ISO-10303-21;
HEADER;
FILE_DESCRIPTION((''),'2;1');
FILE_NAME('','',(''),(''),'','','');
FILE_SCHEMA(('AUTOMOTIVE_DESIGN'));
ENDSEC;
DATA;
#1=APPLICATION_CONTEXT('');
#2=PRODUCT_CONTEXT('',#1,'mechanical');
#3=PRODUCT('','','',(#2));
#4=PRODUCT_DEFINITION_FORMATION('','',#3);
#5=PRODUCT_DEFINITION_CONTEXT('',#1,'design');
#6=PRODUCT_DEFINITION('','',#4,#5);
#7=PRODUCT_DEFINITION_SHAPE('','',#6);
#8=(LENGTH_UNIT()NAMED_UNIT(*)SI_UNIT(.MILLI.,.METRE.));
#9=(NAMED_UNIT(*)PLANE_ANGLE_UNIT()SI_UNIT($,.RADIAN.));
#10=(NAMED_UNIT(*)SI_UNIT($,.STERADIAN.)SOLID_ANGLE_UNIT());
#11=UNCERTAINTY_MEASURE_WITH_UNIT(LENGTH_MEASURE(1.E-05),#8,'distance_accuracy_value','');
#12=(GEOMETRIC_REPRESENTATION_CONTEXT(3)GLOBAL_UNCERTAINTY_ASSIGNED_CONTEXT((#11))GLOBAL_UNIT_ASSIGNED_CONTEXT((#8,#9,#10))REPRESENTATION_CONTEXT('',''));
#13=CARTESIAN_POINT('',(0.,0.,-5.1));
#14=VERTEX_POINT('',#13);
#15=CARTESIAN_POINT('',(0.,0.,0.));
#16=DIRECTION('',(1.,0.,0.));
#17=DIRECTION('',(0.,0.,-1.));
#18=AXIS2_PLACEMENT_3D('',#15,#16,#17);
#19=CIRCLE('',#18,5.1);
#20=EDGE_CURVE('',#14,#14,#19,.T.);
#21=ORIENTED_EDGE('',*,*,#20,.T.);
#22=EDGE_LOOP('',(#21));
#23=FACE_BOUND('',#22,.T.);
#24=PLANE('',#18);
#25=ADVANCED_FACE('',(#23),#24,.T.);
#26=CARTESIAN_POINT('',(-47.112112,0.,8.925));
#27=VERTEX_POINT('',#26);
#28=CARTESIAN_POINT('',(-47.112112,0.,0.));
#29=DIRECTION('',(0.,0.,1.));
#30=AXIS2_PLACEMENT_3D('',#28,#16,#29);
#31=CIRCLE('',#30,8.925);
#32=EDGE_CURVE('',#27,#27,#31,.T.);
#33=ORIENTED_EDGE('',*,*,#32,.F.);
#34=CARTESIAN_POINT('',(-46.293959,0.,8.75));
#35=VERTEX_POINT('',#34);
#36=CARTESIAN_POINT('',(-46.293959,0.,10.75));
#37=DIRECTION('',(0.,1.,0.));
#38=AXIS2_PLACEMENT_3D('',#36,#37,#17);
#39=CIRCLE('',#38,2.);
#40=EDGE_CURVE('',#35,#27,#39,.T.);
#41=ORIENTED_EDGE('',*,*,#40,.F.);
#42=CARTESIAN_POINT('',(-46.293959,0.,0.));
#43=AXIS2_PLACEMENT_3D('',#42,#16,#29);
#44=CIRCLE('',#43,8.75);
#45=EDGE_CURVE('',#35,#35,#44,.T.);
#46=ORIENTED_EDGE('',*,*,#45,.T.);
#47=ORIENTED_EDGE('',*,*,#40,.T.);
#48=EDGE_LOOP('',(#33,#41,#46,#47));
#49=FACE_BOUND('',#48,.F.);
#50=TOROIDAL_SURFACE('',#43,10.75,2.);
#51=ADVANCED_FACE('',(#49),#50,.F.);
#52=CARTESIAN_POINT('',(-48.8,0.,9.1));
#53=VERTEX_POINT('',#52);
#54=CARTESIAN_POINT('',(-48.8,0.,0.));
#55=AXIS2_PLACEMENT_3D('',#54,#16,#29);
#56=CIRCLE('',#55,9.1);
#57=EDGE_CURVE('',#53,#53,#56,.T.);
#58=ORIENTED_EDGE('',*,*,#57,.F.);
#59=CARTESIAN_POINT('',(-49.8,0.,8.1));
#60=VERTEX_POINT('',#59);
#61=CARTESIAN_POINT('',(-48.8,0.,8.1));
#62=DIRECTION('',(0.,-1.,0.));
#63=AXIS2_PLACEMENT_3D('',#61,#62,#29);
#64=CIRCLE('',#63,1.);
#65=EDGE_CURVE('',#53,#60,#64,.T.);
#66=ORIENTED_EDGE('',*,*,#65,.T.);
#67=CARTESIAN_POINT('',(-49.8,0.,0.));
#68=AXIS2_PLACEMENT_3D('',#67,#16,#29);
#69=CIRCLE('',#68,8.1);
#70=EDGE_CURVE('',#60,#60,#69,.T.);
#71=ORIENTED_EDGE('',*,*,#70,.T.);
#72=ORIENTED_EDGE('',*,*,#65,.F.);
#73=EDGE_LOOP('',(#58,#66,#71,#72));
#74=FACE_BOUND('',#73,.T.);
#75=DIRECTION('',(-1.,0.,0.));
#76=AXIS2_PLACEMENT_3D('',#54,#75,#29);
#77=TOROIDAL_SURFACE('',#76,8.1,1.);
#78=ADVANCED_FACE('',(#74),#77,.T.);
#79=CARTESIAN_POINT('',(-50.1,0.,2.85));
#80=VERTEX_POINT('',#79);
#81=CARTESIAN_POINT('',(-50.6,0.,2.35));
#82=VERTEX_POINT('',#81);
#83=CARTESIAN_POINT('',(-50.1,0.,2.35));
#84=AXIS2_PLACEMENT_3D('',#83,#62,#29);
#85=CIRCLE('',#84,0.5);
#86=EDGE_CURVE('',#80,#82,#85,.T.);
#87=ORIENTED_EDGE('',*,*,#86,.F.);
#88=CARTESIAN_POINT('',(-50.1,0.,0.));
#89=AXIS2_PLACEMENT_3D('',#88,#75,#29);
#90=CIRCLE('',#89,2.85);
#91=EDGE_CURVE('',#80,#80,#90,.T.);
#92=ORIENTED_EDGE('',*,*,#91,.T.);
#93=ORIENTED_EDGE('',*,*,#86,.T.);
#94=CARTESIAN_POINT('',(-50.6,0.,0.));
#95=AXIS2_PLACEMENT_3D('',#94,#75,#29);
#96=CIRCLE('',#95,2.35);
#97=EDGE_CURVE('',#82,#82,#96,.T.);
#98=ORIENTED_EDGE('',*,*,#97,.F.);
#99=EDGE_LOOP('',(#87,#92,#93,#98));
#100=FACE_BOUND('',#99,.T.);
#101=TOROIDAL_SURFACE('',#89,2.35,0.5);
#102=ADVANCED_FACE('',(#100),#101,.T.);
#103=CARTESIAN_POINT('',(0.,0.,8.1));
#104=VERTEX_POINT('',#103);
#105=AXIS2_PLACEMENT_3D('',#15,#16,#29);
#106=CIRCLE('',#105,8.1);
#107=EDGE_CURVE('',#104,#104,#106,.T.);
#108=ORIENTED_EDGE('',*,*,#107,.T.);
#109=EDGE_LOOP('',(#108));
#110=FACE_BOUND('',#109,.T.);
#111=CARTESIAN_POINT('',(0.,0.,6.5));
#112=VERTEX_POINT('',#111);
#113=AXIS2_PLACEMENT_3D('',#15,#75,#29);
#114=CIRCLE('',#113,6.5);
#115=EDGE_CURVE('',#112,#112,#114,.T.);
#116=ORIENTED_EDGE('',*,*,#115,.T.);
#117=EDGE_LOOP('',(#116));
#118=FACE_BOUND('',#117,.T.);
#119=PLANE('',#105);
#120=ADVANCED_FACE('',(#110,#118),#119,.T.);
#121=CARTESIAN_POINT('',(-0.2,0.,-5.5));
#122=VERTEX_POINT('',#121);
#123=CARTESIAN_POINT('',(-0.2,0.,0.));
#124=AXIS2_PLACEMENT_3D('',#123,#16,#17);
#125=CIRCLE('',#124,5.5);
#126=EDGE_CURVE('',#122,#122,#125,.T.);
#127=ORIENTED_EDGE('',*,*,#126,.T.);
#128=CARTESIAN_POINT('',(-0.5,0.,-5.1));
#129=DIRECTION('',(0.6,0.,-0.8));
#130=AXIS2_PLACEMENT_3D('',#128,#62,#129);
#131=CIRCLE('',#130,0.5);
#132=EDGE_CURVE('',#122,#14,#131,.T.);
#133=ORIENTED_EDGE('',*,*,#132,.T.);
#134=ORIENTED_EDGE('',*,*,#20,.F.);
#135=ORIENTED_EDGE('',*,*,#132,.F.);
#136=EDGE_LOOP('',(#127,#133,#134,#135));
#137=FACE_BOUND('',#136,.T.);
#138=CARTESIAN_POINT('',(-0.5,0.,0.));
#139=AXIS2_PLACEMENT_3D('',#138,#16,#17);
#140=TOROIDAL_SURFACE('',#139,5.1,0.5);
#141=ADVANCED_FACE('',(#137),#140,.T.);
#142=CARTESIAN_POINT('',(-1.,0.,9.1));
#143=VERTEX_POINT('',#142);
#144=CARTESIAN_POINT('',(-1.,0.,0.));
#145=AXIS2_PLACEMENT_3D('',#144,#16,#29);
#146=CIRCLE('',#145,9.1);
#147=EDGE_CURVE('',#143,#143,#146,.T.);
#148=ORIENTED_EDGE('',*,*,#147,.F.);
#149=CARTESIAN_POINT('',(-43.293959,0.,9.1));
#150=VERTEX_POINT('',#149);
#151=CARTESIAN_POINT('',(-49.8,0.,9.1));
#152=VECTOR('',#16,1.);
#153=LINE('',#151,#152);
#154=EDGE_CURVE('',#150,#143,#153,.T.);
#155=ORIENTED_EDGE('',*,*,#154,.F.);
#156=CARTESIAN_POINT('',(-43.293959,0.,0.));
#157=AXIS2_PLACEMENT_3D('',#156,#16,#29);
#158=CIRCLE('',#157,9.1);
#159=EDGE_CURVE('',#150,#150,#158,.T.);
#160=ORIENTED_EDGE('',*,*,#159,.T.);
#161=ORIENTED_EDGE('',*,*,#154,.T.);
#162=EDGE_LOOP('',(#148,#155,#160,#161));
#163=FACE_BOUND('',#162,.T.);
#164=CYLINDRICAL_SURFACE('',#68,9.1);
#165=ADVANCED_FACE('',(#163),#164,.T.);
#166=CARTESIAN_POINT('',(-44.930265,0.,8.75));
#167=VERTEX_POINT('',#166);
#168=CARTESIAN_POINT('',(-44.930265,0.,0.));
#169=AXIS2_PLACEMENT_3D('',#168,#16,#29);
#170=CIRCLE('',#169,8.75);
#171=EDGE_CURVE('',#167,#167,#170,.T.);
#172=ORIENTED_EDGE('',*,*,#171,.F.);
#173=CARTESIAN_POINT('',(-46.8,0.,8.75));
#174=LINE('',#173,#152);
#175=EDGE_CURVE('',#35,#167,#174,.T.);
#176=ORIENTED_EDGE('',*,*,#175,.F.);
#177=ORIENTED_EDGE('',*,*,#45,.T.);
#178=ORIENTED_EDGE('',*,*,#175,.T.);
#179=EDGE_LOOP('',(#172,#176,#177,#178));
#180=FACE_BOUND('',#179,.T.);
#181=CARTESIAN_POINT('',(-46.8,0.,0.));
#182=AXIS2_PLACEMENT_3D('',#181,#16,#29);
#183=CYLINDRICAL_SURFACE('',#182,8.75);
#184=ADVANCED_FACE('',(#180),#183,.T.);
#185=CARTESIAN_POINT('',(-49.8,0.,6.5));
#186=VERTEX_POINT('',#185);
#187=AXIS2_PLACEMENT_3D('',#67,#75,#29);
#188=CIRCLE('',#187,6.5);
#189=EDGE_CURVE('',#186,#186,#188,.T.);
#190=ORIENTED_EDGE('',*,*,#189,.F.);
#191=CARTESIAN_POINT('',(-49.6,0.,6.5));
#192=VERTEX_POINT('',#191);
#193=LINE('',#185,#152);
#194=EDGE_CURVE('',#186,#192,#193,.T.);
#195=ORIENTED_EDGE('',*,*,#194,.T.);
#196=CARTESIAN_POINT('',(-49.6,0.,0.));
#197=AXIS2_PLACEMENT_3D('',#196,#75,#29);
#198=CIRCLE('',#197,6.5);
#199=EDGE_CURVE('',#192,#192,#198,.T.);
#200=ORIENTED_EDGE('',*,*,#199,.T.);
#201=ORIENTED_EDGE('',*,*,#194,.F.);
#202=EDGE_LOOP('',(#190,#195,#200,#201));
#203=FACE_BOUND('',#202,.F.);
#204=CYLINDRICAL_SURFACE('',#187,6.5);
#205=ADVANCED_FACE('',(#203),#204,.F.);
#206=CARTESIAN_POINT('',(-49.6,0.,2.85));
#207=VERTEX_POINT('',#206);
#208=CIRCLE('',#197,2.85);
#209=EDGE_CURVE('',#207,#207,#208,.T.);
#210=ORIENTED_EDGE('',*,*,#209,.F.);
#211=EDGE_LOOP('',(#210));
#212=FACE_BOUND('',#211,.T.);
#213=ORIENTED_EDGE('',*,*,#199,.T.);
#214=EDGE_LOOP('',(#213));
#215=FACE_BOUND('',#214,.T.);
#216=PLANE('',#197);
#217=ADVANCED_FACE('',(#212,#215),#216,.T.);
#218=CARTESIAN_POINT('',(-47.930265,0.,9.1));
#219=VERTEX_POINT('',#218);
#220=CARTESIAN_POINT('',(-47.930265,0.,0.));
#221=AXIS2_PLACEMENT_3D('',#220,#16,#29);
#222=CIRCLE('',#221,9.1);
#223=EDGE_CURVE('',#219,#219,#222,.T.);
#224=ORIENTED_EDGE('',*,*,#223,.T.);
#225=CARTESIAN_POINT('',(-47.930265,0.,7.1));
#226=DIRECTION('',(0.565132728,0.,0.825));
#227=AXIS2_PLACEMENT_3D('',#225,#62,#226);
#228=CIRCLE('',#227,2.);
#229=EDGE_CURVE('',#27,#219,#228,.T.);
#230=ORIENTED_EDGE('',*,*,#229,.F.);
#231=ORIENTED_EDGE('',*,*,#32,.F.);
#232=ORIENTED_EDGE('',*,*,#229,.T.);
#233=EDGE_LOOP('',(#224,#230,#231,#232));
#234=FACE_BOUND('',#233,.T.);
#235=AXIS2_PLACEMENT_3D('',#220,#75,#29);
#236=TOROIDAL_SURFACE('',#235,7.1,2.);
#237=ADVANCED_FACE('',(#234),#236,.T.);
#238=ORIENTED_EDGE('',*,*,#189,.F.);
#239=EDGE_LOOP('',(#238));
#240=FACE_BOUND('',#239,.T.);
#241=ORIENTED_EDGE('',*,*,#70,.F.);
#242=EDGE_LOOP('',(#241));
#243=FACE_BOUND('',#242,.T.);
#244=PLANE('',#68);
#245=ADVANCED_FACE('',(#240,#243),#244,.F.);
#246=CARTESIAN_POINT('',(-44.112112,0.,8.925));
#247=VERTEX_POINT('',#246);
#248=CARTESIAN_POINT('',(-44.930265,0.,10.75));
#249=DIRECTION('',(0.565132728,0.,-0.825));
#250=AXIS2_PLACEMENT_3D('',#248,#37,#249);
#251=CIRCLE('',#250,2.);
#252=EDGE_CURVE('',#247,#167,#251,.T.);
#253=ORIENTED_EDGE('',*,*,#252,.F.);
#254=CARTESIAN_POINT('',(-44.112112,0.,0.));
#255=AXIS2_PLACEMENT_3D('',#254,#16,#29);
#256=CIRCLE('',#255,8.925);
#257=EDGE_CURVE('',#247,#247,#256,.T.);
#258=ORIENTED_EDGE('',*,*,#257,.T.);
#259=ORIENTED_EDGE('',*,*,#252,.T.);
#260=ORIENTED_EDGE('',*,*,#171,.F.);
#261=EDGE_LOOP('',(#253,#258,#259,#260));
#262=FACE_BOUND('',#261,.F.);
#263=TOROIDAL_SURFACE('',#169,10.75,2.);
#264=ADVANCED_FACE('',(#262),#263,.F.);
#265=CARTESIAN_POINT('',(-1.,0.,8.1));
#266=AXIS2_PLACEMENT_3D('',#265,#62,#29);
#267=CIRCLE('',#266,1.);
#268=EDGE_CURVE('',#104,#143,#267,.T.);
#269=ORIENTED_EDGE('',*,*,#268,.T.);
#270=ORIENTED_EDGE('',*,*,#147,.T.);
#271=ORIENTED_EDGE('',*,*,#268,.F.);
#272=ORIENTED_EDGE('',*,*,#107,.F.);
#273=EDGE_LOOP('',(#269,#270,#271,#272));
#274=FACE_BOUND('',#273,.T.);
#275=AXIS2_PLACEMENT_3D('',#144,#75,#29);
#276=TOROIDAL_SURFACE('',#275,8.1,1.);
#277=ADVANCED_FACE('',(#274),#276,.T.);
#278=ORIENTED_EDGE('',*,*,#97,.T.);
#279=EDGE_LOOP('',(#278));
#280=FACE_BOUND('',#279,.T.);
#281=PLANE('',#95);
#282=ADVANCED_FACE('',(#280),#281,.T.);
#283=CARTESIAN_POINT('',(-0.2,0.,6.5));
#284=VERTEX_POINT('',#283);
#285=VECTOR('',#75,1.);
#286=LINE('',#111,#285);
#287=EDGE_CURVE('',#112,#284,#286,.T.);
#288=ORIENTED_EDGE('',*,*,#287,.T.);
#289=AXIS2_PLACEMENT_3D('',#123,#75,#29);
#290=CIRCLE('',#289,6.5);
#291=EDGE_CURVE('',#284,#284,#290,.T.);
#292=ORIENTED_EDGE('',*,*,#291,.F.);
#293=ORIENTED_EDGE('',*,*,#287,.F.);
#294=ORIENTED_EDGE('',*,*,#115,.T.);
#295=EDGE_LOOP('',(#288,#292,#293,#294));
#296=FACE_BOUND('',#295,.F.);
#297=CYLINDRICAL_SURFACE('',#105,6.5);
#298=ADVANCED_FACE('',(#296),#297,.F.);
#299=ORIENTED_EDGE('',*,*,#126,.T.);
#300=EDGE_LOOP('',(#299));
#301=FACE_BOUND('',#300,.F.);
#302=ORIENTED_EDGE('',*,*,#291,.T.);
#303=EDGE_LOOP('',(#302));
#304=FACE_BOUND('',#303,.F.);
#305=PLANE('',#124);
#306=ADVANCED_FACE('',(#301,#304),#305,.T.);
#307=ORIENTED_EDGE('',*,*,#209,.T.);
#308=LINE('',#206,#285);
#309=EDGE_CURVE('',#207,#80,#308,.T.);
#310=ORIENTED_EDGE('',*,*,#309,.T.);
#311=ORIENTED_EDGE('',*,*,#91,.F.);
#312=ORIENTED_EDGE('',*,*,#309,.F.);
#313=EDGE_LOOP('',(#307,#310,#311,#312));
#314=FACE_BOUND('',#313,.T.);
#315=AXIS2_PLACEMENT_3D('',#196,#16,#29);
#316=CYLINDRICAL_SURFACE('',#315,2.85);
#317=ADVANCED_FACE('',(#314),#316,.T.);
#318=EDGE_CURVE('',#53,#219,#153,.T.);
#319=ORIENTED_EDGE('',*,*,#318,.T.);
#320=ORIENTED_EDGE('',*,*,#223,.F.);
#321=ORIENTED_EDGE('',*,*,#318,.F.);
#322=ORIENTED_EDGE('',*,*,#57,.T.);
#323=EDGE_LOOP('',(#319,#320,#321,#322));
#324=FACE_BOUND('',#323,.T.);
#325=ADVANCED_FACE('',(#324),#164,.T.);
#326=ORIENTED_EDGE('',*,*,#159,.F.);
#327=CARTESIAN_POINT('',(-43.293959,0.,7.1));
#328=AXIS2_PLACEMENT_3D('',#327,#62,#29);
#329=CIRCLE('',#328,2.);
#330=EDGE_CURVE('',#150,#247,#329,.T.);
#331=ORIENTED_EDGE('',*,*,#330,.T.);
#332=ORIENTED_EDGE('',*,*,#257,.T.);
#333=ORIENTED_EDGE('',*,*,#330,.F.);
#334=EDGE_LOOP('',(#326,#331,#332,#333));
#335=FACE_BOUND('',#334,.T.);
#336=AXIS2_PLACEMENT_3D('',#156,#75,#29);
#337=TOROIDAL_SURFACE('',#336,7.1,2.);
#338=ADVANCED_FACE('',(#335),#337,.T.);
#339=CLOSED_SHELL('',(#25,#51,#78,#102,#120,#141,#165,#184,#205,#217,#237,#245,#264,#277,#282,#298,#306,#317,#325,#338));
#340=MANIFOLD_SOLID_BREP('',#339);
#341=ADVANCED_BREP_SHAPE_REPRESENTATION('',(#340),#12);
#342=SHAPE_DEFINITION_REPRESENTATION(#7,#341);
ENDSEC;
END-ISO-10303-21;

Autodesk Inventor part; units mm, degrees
ref_plane "YZ Plane" through (0, 0, 0) normal (1, 0, 0) x (0, 1, 0)
ref_plane "XZ Plane" through (0, 0, 0) normal (0, 1, 0) x (-1, 0, 0)
sketch "Skizze1" plane through (0, 0, 0) normal (0, 1, 0) x (-1, 0, 0)
  line L0 (0, 0) -> (49.8, 0)
  line L1 (49.8, 0) -> (49.8, 9.1)
  line L2 (49.8, 9.1) -> (0, 9.1)
  line L3 (0, 9.1) -> (0, 0)
  line L4 (43.8, 9.1) -> (46.8, 9.1)
  line L5 (46.8, 9.1) -> (46.8, 8.75)
  line L6 (46.8, 8.75) -> (43.8, 8.75)
  line L7 (43.8, 8.75) -> (43.8, 9.1)
  line L8 (59.76, 0) -> (-9.96, 0) projected
  dimension "d0" = 49.8
  dimension "d1" = 9.1
  dimension "d2" = 3
  dimension "d3" = 3
  dimension "d4" = 0.35
revolve "Umdrehung1" add sketch "Skizze1" angle 360 about axis through (-10, 0, 0) along (1, 0, 0) contours L3 L2 L7 L6 L5 L1 L0
ref_plane "Arbeitsebene1" through (-24.9, 0, 0) normal (-1, 0, 0) x (0, 0, 1)
fillet "Rundung1" radius 2 4 edges at (-46.8, 0, -9.1) (-46.8, 0, -8.75) (-43.8, 0, -8.75) (-43.8, 0, -9.1)
fillet "Rundung2" radius 1 2 edges at (-49.8, 0, -9.1) (0, 0, -9.1)
sketch "Skizze2" plane through (-49.8, 0, 0) normal (-1, 0, 0) x (0, 0, 1)
  circle A0 centre (0, 0) radius 8.1 projected
  circle A1 centre (0, 0) radius 6.5
  dimension "d8" = 13
extrude "Extrusion1" cut sketch "Skizze2" against normal blind 0.2 contours A1
mirror "Spiegeln1" about plane through (-24.9, 0, 0) normal (-1, 0, 0) of "Extrusion1"
sketch "Skizze3" plane through (-49.6, 0, 0) normal (-1, 0, 0) x (0, 0, 1)
  circle A0 centre (0, 0) radius 6.5 projected
  circle A1 centre (0, 0) radius 2.85
  dimension "d11" = 5.7
extrude "Extrusion2" add sketch "Skizze3" along normal blind 1 contours A1
fillet "Rundung3" radius 0.5 1 edges at (-50.6, 0, -2.85)
sketch "Skizze4" plane through (-0.2, 0, 0) normal (1, 0, 0) x (0, 0, -1)
  circle A0 centre (0, 0) radius 6.5 projected
  circle A1 centre (0, 0) radius 5.5
  dimension "d15" = 1
extrude "Extrusion3" add sketch "Skizze4" along normal blind 0.2 contours A1
fillet "Rundung4" radius 0.5 1 edges at (0, 0, 5.5)
properties part number "accu_18500"
